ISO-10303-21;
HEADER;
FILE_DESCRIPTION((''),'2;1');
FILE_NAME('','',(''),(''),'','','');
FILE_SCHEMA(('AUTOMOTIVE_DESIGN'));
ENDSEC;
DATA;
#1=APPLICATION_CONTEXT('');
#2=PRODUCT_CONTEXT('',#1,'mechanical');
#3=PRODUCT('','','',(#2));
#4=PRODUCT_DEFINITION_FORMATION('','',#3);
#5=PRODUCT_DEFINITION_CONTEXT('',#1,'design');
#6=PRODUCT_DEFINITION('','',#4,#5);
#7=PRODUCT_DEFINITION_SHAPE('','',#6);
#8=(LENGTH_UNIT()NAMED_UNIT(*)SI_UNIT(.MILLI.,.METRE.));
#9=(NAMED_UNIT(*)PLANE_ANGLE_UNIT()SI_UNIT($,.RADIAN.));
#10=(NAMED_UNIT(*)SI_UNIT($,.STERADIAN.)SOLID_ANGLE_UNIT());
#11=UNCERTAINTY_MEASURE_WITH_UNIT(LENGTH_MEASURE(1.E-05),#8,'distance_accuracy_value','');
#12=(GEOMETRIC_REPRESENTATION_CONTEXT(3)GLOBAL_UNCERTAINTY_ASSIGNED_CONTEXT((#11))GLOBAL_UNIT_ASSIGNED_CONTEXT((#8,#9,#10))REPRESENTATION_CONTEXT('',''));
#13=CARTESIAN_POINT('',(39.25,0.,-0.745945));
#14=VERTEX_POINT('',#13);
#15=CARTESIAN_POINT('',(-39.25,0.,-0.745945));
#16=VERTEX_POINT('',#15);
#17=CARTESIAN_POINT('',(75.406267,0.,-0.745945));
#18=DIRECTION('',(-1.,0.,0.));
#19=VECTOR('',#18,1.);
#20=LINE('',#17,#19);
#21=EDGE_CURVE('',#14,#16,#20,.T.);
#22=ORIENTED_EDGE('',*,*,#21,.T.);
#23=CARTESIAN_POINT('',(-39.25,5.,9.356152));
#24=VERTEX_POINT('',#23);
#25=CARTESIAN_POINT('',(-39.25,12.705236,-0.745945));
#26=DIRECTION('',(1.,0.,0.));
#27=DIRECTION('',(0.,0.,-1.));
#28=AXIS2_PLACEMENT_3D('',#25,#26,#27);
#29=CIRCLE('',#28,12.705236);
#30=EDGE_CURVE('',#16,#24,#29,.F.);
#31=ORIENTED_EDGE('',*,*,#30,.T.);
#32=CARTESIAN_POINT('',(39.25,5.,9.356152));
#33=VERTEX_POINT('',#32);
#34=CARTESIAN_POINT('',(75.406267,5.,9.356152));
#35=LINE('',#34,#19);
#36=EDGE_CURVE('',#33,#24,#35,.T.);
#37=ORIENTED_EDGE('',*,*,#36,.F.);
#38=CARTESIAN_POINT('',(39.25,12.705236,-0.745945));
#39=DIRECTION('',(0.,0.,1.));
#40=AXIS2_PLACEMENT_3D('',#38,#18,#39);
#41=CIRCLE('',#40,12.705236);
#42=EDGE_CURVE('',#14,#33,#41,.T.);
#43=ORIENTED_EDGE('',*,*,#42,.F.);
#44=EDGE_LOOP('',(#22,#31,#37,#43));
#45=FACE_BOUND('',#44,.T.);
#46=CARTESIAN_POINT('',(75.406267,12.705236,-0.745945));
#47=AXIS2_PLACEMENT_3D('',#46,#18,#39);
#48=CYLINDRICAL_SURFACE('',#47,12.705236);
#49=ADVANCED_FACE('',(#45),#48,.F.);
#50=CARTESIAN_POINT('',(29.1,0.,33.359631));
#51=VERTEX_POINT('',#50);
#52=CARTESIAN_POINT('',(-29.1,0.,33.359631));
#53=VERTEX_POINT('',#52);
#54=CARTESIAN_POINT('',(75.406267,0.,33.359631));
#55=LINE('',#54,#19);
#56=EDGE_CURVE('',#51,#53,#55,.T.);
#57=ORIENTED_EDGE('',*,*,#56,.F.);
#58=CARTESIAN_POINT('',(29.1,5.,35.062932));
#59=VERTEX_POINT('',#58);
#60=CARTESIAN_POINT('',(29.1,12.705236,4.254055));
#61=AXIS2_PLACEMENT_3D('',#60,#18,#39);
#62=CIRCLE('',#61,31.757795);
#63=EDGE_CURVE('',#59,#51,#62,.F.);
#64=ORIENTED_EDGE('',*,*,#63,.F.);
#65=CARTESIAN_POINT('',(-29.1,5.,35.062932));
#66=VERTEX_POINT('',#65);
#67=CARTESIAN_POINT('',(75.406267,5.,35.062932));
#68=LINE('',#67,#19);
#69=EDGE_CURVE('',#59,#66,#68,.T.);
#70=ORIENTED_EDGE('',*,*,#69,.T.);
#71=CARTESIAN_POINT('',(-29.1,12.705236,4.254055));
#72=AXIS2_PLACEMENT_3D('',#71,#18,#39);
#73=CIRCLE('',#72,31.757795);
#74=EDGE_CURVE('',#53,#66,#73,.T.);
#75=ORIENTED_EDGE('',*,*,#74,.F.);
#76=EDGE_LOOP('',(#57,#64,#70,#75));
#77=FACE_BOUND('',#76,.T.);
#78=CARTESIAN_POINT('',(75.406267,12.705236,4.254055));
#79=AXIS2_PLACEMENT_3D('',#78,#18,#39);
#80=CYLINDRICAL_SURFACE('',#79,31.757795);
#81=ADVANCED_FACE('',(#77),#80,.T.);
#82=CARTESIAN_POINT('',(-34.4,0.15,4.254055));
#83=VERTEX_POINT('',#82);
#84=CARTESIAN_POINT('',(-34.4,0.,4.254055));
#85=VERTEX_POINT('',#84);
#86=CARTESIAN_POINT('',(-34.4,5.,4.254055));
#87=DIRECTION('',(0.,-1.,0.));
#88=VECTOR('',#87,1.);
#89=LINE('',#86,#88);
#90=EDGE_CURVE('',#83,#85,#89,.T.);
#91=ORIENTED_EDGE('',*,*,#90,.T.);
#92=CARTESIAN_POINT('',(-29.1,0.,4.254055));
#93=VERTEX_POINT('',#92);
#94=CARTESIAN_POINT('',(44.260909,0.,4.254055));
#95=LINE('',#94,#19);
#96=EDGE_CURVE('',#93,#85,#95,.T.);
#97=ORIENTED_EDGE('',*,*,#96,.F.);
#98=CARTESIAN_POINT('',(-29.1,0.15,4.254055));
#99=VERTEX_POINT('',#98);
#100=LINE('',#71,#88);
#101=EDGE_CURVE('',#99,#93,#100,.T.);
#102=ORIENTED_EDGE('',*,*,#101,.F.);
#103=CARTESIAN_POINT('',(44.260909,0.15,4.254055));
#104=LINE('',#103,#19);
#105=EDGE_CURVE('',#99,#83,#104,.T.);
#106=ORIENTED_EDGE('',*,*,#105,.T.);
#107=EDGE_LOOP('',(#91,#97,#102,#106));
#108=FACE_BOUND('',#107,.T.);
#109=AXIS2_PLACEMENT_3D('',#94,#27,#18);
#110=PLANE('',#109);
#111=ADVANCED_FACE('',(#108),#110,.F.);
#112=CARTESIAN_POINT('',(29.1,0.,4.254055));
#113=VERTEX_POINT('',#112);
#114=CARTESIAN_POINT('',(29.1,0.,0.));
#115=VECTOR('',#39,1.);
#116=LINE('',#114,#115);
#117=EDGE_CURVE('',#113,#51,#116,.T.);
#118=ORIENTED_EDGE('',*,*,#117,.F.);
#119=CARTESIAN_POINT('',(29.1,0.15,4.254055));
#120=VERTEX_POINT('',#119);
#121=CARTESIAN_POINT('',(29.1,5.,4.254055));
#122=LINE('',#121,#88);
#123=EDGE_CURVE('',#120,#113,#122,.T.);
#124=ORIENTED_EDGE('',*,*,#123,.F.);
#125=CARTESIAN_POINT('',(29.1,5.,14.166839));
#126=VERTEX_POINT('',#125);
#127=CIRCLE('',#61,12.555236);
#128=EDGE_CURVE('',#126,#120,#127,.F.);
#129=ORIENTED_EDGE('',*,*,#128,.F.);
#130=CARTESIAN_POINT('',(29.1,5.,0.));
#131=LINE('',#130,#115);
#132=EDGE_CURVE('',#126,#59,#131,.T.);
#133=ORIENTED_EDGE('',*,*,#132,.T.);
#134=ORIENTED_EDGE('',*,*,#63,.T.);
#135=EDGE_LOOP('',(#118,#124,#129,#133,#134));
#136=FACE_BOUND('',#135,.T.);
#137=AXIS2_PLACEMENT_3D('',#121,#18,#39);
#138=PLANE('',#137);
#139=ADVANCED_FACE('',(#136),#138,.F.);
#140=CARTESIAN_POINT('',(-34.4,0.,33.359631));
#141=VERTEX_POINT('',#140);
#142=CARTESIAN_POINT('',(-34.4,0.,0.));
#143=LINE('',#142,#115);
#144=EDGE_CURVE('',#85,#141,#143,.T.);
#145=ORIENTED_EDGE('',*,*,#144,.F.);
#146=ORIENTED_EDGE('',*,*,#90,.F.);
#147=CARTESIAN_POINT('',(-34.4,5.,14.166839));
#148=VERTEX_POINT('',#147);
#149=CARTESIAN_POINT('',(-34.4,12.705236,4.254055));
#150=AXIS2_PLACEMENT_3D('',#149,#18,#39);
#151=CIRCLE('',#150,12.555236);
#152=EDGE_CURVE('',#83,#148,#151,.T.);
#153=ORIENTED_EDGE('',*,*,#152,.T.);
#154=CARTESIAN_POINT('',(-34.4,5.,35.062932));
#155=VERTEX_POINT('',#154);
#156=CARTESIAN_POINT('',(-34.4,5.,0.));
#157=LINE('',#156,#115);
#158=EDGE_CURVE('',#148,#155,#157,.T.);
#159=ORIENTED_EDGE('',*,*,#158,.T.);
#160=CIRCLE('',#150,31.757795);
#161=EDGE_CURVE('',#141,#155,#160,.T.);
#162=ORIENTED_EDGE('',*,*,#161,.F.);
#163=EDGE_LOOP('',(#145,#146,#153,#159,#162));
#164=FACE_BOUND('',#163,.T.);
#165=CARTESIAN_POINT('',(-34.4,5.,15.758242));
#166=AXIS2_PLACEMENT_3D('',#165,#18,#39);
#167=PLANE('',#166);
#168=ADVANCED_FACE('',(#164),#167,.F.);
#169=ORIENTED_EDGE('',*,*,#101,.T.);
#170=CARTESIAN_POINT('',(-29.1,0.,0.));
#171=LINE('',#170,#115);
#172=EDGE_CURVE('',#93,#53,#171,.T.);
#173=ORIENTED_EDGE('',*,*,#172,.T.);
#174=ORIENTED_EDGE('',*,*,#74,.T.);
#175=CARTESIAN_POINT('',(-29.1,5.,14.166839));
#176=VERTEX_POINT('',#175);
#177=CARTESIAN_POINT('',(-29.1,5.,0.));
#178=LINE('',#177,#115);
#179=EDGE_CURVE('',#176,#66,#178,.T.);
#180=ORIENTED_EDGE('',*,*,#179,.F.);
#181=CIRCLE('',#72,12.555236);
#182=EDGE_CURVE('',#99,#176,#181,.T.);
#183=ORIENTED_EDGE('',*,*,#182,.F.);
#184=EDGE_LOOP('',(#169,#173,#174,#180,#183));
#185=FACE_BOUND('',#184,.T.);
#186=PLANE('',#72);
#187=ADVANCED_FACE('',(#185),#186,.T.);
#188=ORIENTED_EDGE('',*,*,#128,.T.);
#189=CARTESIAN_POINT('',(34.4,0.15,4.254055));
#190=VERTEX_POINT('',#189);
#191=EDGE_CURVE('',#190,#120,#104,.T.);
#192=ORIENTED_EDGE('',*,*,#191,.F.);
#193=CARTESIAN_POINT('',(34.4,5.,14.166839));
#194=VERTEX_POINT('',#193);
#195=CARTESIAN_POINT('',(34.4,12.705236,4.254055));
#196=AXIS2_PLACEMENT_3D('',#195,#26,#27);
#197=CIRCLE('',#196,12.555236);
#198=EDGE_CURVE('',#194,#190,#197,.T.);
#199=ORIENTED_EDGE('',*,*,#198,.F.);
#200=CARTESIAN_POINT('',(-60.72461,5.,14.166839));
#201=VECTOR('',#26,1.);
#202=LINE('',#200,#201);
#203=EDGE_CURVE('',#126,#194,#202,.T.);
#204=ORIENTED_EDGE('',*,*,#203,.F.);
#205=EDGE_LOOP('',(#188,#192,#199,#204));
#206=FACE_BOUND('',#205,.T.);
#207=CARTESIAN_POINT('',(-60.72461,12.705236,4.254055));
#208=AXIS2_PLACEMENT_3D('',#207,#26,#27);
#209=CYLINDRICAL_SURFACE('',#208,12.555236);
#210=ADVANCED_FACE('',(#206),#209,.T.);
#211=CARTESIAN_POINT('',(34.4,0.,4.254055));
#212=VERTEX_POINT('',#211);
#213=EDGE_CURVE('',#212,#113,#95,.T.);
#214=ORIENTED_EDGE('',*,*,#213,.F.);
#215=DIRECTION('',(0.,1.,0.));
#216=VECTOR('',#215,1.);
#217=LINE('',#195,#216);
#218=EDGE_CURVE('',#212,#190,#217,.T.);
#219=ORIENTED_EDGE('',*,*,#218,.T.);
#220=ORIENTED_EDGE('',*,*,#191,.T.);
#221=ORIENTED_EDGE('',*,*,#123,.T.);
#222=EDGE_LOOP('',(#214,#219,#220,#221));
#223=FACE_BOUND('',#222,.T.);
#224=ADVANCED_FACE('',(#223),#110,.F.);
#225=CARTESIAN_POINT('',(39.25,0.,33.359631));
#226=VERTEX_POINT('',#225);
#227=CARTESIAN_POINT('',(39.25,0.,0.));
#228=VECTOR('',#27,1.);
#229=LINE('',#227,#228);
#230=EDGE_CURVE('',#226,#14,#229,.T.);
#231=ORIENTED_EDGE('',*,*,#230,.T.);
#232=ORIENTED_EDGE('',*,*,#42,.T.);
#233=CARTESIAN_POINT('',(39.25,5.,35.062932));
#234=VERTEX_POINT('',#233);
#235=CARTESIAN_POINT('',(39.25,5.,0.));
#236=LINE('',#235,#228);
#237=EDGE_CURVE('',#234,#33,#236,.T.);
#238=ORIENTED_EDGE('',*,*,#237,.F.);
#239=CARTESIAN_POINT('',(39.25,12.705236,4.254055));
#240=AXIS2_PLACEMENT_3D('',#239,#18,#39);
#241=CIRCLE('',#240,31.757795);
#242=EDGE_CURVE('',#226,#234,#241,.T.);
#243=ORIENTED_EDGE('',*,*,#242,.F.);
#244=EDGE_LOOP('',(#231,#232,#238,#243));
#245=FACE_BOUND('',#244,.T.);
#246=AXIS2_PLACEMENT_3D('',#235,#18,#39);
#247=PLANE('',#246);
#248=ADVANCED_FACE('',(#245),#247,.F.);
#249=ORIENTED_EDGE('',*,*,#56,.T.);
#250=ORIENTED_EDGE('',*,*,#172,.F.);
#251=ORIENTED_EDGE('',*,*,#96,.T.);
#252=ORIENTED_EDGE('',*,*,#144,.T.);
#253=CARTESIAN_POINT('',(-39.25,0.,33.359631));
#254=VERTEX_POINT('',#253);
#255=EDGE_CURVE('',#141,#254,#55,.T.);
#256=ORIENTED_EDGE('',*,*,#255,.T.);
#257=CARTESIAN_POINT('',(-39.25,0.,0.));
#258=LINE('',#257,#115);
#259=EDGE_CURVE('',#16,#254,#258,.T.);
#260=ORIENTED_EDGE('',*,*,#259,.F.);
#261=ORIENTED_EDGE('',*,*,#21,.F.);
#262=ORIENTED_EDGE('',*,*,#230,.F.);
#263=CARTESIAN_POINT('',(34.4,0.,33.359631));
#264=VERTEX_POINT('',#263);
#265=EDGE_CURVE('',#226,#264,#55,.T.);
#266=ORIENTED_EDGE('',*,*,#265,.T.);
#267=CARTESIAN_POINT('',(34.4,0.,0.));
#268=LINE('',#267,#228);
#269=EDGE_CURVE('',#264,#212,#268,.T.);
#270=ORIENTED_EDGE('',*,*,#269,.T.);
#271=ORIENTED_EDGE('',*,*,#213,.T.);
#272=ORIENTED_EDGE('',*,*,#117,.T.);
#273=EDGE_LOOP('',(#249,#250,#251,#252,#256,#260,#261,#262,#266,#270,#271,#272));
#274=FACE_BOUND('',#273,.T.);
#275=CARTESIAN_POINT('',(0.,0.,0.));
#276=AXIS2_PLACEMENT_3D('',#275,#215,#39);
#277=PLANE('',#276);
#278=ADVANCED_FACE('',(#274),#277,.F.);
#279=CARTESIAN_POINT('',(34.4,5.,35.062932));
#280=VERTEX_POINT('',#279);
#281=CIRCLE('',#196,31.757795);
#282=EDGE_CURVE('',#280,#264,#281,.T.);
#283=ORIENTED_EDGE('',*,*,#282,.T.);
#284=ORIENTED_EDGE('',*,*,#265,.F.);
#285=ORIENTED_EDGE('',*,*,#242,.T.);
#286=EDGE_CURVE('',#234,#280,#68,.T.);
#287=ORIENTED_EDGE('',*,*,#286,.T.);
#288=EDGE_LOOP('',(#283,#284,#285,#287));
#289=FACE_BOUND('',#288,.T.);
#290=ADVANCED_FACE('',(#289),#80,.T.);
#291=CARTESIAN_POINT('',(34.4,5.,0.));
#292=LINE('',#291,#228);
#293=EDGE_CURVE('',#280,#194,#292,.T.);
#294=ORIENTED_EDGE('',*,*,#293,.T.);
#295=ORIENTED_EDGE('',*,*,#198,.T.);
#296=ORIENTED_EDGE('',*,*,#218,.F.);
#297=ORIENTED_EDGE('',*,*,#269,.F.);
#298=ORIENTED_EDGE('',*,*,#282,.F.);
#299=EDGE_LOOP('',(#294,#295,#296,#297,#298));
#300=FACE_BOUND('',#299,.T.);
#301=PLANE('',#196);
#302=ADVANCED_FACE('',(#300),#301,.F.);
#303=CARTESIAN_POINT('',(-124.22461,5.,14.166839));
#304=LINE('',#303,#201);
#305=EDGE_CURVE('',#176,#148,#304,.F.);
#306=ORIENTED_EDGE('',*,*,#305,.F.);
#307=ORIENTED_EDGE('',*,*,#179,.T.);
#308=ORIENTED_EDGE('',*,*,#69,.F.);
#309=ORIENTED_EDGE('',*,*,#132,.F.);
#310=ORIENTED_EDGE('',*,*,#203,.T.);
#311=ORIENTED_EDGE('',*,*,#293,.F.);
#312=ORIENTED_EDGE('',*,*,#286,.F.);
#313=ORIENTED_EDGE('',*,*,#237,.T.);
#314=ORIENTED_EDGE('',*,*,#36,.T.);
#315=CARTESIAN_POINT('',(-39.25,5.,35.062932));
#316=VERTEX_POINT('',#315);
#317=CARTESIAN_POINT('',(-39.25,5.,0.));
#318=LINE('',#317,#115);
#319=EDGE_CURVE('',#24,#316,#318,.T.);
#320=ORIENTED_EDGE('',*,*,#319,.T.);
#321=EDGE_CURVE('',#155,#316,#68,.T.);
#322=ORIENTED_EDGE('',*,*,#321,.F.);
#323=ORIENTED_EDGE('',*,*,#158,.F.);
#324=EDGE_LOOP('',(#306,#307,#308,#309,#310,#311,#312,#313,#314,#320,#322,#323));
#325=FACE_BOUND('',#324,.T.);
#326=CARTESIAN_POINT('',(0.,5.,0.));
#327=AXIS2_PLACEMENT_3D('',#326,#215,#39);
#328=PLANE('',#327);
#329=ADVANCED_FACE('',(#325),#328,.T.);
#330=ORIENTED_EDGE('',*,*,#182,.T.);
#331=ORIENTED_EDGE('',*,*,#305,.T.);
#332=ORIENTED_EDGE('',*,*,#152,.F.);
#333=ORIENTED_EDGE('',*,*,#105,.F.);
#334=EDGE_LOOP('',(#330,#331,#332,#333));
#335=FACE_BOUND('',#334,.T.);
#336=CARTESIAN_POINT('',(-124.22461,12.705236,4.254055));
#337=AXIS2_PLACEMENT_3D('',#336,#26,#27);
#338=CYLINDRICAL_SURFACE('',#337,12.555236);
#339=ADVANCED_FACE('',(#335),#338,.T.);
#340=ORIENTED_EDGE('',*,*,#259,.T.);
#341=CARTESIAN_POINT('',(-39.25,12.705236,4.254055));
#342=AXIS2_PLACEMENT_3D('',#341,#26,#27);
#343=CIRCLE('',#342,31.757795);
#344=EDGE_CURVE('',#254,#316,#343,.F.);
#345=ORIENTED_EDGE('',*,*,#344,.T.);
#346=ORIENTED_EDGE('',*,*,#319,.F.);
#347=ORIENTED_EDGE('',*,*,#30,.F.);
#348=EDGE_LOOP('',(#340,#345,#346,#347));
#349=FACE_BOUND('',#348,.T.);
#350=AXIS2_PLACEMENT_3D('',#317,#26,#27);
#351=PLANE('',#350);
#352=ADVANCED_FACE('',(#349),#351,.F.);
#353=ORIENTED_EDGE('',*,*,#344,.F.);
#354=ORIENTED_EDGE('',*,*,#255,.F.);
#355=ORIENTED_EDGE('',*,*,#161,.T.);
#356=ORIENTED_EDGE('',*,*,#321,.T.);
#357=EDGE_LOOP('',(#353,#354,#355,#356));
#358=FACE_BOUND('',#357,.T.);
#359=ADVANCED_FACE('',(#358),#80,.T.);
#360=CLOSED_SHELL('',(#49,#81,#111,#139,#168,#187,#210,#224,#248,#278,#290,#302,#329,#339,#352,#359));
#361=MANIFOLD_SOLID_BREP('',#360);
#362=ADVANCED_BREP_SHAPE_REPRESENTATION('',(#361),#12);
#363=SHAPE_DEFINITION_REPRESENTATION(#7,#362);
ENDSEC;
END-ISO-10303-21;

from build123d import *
from build123d.topology import SkipClean

# Parameters (mm, degrees)
BOSS_EXTRUDE1_DEPTH     = 5
BOSS_EXTRUDE2_START     = -39.25
BOSS_EXTRUDE2_DEPTH     = 78.5
CUT_EXTRUDE2_START      = 5.3
SKETCH4_R               = 31.757795359
SKETCH4_R_2             = 12.555236476
CUT_EXTRUDE2_DEPTH      = 5.3
CUT_EXTRUDE3_START      = -58.2
SKETCH4_2_R             = 31.757795359
SKETCH4_2_R_2           = 12.555236476
CUT_EXTRUDE3_DEPTH      = 5.3
CUT_EXTRUDE1_DEPTH      = 53.867491885
CUT_EXTRUDE1_DEPTH_BACK = 53.867491885
SKETCH3_R               = 12.705236476
BOSS_EXTRUDE3_START     = -34.4
BOSS_EXTRUDE3_DEPTH     = 68.8


# Read off the part's stored shape, not the designer's step: Boss-Extrude3
with BuildPart() as part:
    # Sketch1 → Boss-Extrude1 (new body)
    with BuildSketch(Plane(origin=(0, 0, 0), x_dir=(1, 0, 0), z_dir=(0, 1, 0))):
        Polygon((-39.25, 0), (39.25, 0), (39.25, -15.758241935), (34.4, -15.758241935), (34.4, -4.254055051), (29.1, -4.254055051), (29.1, -15.758241935), (-29.1, -15.758241935), (-29.1, -4.254055051), (-34.4, -4.254055051), (-34.4, -15.758241935), (-39.25, -15.758241935), align=None)
    extrude(amount=BOSS_EXTRUDE1_DEPTH)

    # Sketch2 → Boss-Extrude2 (add)
    with BuildSketch(Plane(origin=(0, 0, 0), x_dir=(0, 0, -1), z_dir=(1, 0, 0)).offset(BOSS_EXTRUDE2_START)):
        with BuildLine():
            ThreePointArc((-4.254055051, 0), (-9.889930421, 1.318404488), (-14.356152099, 5))
            Line((-14.356152099, 5), (-35.062931969, 5))
            ThreePointArc((-35.062931969, 5), (-34.315415728, 2.464525546), (-33.359630671, 0))
            Line((-33.359630671, 0), (-4.254055051, 0))
        make_face()
        with BuildLine():
            ThreePointArc((-1.754055051, 0.248389607), (-5.988122383, 1.931408415), (-9.356152099, 5))
            Line((-9.356152099, 5), (-14.356152099, 5))
            ThreePointArc((-14.356152099, 5), (-9.889930421, 1.318404488), (-4.254055051, 0))
            ThreePointArc((-4.254055051, 0), (-2.997900463, 0.0622499), (-1.754055051, 0.248389607))
        make_face()
        with BuildLine():
            ThreePointArc((0.745944949, 0), (-0.510209639, 0.0622499), (-1.754055051, 0.248389607))
            ThreePointArc((-1.754055051, 0.248389607), (-2.997900463, 0.0622499), (-4.254055051, 0))
            Line((-4.254055051, 0), (0, 0))
            Line((0, 0), (0.745944949, 0))
        make_face()
    extrude(amount=BOSS_EXTRUDE2_DEPTH)

    # Sketch4 → Cut-Extrude2 (cut)
    with BuildSketch(Plane.ZY.offset(29.1).offset(CUT_EXTRUDE2_START)):
        with Locations((4.254055051, 12.705236476)):
            Circle(SKETCH4_R)
        with Locations((4.254055051, 12.705236476)):
            Circle(SKETCH4_R_2, mode=Mode.SUBTRACT)
    extrude(amount=-CUT_EXTRUDE2_DEPTH, mode=Mode.SUBTRACT)

    # Sketch4<2> → Cut-Extrude3 (cut)
    with BuildSketch(Plane.ZY.offset(29.1).offset(CUT_EXTRUDE3_START)):
        with Locations((4.254055051, 12.705236476)):
            Circle(SKETCH4_2_R)
        with Locations((4.254055051, 12.705236476)):
            Circle(SKETCH4_2_R_2, mode=Mode.SUBTRACT)
    extrude(amount=-CUT_EXTRUDE3_DEPTH, mode=Mode.SUBTRACT)

    # Sketch3 → Cut-Extrude1 (cut, two sides: drawn at the far end of the back side and taken through both)
    with SkipClean():  # the faces are left unmerged after this step: merging them gives an invalid solid
        with BuildSketch(Plane(origin=(0, 0, 0), x_dir=(0, 0, -1), z_dir=(1, 0, 0)).offset(-CUT_EXTRUDE1_DEPTH_BACK)):
            with Locations((0.745944949, 12.705236476)):
                Circle(SKETCH3_R)
        extrude(amount=CUT_EXTRUDE1_DEPTH + CUT_EXTRUDE1_DEPTH_BACK, mode=Mode.SUBTRACT)

    # Boss-Extrude3 outline → Boss-Extrude3 (add)
    with SkipClean():  # the faces are left unmerged after this step: merging them gives an invalid solid
        with BuildSketch(Plane(origin=(0, 0, 0), x_dir=(0, 0, -1), z_dir=(1, 0, 0)).offset(BOSS_EXTRUDE3_START)):
            with BuildLine():
                Line((-4.254055051, 0), (0.745944949, 0))
                ThreePointArc((0.745944949, 0), (-0.702961041, 0.082887038), (-2.132962145, 0.330466666))
                ThreePointArc((-2.132962145, 0.330466666), (-3.189676907, 0.195198022), (-4.254055051, 0.15))
                Line((-4.254055051, 0.15), (-4.254055051, 0))
            make_face()
        extrude(amount=BOSS_EXTRUDE3_DEPTH)


solid = part.part
